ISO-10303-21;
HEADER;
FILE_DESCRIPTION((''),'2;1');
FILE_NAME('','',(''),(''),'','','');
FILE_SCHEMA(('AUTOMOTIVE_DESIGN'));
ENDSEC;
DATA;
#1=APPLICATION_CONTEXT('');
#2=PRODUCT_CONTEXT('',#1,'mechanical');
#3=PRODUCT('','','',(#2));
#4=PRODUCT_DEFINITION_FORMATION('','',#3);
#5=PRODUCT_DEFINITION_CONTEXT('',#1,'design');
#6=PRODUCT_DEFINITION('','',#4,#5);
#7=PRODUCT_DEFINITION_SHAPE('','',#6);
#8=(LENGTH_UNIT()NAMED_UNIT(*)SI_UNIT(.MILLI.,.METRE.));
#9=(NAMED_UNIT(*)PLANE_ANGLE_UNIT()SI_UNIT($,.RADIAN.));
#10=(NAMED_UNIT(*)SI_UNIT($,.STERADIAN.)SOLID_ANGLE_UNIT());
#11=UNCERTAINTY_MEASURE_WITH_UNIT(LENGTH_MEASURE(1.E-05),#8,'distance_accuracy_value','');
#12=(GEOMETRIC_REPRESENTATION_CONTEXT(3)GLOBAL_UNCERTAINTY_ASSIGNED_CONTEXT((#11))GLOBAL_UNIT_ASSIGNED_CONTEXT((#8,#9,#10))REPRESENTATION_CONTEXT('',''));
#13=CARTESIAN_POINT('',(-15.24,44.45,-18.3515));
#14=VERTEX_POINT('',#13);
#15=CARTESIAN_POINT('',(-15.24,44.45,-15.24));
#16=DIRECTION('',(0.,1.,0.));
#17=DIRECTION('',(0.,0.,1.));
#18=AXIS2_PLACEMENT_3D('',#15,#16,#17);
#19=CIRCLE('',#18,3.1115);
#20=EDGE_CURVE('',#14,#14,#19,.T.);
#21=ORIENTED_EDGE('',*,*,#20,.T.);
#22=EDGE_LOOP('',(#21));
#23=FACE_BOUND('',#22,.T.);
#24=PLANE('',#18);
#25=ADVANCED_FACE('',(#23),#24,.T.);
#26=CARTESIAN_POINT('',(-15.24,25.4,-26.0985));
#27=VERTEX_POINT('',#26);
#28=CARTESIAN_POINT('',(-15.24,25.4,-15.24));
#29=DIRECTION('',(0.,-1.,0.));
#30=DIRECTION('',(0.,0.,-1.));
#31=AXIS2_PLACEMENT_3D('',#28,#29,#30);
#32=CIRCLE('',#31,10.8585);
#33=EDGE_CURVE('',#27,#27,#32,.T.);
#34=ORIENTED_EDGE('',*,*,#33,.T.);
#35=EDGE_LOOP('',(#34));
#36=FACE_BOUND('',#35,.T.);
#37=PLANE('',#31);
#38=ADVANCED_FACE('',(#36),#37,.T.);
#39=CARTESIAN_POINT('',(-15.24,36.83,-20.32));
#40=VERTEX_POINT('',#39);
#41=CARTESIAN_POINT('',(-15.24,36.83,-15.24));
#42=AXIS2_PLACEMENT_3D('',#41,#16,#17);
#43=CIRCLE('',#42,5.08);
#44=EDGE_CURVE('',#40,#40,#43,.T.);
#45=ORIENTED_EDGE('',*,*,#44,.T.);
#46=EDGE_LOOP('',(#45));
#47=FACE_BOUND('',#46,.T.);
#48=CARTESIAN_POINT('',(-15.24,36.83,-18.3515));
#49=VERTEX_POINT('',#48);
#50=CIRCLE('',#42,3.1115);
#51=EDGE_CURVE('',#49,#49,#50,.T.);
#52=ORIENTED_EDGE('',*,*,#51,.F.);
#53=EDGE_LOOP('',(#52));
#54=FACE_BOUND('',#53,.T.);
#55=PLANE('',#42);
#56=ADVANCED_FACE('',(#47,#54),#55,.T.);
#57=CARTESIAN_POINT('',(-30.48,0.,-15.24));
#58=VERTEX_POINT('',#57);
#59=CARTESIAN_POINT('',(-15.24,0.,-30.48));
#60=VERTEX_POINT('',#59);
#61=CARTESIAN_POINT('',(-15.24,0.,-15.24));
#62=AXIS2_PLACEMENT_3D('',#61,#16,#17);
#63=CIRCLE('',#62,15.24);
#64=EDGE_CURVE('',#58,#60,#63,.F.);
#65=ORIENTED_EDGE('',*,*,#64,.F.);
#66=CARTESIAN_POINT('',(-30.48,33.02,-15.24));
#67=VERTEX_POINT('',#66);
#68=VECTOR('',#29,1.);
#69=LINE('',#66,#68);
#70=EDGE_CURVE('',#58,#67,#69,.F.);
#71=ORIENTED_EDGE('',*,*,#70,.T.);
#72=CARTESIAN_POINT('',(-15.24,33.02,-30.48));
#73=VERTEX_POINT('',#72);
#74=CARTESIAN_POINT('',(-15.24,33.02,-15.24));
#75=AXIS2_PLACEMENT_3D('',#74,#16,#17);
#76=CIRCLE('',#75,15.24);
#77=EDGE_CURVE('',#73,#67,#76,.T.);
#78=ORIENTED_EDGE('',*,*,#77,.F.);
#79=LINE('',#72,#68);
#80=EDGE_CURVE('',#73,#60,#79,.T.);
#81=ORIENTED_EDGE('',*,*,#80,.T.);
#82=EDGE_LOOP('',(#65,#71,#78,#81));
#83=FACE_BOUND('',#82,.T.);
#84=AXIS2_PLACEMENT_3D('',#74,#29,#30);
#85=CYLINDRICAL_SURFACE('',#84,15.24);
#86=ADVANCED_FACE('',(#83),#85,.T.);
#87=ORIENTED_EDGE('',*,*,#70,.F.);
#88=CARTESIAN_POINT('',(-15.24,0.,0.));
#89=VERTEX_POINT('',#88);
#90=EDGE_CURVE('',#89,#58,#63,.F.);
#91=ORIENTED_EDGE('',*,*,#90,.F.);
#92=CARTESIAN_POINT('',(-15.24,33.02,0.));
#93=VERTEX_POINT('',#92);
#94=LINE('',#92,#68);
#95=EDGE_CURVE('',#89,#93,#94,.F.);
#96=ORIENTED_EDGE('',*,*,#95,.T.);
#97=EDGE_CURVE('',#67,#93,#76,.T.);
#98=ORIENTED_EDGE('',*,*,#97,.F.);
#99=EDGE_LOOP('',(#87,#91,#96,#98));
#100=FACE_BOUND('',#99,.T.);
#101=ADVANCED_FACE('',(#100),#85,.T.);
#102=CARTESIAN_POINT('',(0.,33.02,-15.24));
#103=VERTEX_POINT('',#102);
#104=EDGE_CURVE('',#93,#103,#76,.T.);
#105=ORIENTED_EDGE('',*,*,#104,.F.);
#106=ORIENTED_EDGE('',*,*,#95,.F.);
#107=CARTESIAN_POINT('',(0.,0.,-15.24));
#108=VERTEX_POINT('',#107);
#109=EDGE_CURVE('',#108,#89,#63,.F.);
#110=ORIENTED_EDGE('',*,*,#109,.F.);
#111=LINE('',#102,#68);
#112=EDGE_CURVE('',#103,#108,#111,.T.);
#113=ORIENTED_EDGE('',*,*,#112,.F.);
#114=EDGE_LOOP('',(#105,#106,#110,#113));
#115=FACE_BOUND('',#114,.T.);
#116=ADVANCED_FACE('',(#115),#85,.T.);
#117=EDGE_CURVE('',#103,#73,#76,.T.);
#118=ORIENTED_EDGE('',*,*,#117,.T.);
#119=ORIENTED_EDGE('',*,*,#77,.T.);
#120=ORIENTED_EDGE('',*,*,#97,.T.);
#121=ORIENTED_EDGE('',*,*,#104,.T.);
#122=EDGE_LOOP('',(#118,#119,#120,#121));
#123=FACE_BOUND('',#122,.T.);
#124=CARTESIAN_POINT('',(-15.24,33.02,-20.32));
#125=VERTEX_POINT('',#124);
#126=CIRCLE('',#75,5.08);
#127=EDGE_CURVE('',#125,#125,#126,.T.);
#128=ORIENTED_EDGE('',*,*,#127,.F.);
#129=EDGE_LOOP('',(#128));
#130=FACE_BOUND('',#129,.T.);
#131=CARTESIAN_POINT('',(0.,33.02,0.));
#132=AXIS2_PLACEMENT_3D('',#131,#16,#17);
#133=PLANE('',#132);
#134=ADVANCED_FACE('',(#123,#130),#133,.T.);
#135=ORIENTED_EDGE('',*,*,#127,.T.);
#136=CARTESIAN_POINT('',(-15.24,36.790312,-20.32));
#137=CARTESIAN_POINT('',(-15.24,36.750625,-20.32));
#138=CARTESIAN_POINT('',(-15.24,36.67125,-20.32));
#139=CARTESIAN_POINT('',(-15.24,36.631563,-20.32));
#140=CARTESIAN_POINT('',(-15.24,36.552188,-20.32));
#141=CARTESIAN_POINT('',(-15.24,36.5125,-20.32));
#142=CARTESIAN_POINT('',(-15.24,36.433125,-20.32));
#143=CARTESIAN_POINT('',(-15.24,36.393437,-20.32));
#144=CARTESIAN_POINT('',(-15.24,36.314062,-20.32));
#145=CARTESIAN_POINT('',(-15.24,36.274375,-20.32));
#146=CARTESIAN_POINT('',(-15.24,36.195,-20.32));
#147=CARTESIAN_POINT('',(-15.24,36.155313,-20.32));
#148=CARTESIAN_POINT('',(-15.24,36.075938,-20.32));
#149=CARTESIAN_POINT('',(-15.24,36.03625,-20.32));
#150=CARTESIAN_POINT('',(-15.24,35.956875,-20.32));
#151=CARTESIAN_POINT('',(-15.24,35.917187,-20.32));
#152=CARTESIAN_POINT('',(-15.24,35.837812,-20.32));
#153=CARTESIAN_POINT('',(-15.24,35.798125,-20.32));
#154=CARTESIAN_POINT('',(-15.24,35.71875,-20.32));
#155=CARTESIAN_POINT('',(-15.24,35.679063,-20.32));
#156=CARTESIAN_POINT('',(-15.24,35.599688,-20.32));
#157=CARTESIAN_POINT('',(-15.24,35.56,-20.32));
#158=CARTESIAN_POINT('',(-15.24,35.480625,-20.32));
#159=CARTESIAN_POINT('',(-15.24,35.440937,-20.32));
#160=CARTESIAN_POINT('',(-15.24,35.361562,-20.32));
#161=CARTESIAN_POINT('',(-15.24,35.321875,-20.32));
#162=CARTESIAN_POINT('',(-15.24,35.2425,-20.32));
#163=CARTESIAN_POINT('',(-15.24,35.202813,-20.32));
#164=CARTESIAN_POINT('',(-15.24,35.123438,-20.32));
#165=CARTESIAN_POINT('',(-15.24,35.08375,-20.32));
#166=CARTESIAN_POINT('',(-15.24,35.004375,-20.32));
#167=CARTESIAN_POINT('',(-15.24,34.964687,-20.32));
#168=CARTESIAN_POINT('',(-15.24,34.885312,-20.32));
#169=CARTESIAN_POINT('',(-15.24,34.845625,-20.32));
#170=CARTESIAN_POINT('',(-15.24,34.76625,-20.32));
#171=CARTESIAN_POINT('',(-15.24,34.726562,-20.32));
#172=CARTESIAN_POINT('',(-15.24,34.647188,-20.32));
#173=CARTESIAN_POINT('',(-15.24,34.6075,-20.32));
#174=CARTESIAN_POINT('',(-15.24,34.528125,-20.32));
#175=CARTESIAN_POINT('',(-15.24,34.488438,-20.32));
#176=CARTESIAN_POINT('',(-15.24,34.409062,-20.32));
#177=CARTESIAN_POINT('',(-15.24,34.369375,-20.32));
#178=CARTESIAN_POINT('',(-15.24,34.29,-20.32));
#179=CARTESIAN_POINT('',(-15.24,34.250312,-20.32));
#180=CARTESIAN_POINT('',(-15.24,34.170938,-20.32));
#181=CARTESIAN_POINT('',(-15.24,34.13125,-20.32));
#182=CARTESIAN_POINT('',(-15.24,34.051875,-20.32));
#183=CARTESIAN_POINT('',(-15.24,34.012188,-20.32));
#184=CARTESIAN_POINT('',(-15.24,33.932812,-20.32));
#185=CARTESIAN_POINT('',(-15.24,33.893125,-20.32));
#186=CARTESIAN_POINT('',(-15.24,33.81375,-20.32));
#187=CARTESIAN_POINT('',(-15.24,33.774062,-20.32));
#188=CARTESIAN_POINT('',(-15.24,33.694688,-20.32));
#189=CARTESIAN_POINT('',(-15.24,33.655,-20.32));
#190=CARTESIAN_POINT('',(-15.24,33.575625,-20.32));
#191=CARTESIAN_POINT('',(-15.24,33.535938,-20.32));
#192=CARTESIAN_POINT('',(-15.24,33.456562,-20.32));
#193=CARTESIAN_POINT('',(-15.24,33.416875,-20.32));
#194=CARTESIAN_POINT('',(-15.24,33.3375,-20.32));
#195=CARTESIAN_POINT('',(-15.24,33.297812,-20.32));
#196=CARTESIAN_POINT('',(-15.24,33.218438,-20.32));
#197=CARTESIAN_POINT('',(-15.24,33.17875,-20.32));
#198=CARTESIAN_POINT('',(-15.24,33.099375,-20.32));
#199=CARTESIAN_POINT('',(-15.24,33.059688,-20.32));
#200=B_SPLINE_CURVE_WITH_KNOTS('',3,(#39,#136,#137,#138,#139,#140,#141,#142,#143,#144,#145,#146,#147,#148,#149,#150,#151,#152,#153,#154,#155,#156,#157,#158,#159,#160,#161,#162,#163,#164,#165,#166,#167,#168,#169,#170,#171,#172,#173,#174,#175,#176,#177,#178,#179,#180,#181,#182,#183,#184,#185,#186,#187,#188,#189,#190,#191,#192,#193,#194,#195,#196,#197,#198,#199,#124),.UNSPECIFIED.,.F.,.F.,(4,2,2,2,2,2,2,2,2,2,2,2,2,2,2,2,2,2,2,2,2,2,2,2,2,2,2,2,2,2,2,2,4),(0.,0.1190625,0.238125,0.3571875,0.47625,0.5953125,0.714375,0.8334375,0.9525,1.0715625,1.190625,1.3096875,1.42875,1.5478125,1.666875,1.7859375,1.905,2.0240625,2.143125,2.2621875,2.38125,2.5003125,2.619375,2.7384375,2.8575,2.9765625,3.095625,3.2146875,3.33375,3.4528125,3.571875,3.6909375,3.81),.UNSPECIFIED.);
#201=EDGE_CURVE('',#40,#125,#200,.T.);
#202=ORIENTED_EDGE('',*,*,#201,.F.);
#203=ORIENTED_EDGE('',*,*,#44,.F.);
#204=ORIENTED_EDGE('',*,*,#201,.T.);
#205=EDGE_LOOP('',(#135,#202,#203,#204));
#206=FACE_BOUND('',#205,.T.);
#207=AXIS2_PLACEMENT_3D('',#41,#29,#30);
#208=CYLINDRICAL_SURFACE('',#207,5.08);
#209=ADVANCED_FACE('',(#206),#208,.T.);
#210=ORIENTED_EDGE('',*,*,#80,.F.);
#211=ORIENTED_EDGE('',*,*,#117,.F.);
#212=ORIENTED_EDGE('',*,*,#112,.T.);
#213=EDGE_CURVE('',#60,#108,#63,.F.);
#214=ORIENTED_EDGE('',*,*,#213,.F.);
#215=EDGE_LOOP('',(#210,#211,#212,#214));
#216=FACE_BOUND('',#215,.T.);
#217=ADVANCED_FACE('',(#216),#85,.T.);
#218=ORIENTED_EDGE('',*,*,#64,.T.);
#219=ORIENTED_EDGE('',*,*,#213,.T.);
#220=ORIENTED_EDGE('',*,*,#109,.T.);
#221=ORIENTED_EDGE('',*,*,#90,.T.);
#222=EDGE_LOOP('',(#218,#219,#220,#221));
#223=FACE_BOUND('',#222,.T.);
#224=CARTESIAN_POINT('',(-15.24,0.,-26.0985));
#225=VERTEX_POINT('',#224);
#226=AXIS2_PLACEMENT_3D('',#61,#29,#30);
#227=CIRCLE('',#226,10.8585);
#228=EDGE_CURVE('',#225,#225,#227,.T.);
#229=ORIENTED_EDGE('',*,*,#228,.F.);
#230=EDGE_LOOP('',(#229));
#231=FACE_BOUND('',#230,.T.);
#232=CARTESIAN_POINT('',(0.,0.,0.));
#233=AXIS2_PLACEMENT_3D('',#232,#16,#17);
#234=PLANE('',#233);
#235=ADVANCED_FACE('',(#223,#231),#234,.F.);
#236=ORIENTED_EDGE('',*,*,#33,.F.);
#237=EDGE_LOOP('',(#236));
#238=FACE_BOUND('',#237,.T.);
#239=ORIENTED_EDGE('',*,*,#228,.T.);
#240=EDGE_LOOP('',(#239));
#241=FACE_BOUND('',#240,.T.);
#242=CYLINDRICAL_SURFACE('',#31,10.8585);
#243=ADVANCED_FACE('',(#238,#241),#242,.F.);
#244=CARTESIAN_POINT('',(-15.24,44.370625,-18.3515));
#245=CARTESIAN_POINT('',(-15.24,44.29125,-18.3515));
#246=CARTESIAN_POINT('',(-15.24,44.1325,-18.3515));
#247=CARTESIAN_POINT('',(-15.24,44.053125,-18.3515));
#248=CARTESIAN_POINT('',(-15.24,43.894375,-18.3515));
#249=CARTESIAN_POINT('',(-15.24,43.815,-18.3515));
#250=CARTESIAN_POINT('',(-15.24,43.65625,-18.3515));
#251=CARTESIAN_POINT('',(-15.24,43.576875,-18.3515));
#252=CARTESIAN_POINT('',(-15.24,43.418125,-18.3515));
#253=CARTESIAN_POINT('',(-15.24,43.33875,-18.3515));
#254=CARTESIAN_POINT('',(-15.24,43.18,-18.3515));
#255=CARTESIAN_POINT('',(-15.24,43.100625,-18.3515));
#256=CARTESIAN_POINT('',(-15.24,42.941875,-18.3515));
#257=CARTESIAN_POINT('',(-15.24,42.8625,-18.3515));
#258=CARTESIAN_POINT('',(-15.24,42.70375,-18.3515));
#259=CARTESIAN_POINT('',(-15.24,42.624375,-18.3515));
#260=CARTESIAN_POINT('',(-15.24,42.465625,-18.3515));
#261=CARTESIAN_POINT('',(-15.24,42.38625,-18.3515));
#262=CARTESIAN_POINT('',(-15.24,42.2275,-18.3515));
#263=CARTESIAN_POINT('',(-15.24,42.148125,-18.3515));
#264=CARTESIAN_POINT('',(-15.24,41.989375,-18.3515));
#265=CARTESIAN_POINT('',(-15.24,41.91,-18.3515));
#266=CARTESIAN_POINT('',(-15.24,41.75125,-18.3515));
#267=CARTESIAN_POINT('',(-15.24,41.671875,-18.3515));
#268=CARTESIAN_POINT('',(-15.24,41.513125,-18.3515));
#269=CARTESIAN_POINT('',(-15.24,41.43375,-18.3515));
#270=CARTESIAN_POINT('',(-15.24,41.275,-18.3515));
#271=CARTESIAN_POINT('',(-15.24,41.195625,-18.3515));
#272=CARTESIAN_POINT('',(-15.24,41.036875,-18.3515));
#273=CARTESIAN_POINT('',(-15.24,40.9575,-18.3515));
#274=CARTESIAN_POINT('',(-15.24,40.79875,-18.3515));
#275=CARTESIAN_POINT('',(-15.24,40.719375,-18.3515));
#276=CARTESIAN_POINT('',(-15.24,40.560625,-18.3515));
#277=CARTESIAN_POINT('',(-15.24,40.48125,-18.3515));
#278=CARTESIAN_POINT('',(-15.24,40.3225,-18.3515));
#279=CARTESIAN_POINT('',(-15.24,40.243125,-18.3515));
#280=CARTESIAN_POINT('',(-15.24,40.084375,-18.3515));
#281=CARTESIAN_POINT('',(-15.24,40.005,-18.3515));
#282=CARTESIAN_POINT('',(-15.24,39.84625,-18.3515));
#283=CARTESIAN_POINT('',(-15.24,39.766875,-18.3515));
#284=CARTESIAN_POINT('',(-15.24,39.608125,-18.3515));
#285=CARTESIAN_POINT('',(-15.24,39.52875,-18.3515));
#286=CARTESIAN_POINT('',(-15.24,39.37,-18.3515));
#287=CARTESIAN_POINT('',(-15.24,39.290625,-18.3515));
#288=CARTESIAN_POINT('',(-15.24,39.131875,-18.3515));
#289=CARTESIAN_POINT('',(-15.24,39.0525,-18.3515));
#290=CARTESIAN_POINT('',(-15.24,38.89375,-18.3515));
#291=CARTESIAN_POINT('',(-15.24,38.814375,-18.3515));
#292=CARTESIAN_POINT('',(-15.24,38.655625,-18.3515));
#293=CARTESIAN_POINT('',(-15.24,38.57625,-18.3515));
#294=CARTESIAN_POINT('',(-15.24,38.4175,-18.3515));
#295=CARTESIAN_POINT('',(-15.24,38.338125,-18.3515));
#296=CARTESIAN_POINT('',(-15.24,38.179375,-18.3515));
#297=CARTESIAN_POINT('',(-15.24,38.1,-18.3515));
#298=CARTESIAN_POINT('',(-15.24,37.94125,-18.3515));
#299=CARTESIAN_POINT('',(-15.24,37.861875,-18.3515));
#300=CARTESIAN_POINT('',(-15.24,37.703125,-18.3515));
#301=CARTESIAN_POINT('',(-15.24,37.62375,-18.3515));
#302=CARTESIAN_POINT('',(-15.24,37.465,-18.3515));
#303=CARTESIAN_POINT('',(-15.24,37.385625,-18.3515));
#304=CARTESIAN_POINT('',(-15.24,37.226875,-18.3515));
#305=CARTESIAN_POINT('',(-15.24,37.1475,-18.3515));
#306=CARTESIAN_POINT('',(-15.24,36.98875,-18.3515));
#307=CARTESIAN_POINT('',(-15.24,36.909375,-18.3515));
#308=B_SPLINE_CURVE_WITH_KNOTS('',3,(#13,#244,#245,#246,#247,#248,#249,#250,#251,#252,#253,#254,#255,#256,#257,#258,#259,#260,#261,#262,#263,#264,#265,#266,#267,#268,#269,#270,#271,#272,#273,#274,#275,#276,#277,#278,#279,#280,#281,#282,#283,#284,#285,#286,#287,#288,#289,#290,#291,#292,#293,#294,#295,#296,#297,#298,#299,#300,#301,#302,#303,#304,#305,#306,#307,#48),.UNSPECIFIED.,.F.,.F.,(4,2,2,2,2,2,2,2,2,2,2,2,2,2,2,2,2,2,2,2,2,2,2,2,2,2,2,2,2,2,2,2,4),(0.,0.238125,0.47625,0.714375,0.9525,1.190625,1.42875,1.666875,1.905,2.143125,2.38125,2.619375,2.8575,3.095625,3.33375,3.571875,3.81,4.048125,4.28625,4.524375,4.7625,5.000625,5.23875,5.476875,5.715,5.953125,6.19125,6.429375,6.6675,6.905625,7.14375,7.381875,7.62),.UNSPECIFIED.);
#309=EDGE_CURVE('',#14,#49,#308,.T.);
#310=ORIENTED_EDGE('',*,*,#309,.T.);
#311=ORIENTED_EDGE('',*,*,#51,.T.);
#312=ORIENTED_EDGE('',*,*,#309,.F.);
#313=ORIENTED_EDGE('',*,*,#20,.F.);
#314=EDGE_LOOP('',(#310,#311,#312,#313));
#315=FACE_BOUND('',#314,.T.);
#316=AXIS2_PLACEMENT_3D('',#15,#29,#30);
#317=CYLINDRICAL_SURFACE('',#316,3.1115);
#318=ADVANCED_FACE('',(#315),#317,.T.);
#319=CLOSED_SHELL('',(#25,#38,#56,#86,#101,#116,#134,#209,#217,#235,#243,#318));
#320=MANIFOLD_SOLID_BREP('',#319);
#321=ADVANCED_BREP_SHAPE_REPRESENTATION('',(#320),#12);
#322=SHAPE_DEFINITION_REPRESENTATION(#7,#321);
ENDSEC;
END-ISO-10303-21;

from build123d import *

# Parameters (mm, degrees)
SKETCH3_W           = 30.48
SKETCH3_H           = 30.48
BOSS_EXTRUDE1_DEPTH = 33.02
SKETCH4_R           = 5.08
BOSS_EXTRUDE2_DEPTH = 3.81
SKETCH5_R           = 3.1115
BOSS_EXTRUDE3_DEPTH = 7.62
SKETCH6_R           = 10.8585
CUT_EXTRUDE1_DEPTH  = 25.4
FILLET1_R           = 15.24


with BuildPart() as part:
    # Sketch3 → Boss-Extrude1 (new body)
    with BuildSketch(Plane(origin=(0, 0, 0), x_dir=(1, 0, 0), z_dir=(0, 1, 0))):
        with Locations((-15.24, 15.24)):
            Rectangle(SKETCH3_W, SKETCH3_H)
    extrude(amount=BOSS_EXTRUDE1_DEPTH)

    # Sketch4 → Boss-Extrude2 (add)
    with BuildSketch(Plane(origin=(0, 33.02, 0), x_dir=(1, 0, 0), z_dir=(0, 1, 0))):
        with Locations(Location((-15.24, 15.24, 0), (0, 0, 90))):
            Circle(SKETCH4_R)
    extrude(amount=BOSS_EXTRUDE2_DEPTH)

    # Sketch5 → Boss-Extrude3 (add)
    with BuildSketch(Plane(origin=(0, 36.83, 0), x_dir=(1, 0, 0), z_dir=(0, 1, 0))):
        with Locations(Location((-15.24, 15.24, 0), (0, 0, 90))):
            Circle(SKETCH5_R)
    extrude(amount=BOSS_EXTRUDE3_DEPTH)

    # Sketch6 → Cut-Extrude1 (cut)
    with BuildSketch(Plane.XZ):
        with Locations(Location((-15.24, -15.24, 0), (0, 0, 270))):
            Circle(SKETCH6_R)
    extrude(amount=-CUT_EXTRUDE1_DEPTH, mode=Mode.SUBTRACT)

    # Fillet1
    fillet1_edges = [part.edges().sort_by_distance(p)[0] for p in [
        (-30.48, 16.51, -30.48),
        (0, 16.51, -30.48),
        (-30.48, 16.51, 0),
        (0, 16.51, 0),
    ]]
    fillet(fillet1_edges, radius=FILLET1_R - 0.0001)  # a hair under: the kernel refuses the full size


solid = part.part
